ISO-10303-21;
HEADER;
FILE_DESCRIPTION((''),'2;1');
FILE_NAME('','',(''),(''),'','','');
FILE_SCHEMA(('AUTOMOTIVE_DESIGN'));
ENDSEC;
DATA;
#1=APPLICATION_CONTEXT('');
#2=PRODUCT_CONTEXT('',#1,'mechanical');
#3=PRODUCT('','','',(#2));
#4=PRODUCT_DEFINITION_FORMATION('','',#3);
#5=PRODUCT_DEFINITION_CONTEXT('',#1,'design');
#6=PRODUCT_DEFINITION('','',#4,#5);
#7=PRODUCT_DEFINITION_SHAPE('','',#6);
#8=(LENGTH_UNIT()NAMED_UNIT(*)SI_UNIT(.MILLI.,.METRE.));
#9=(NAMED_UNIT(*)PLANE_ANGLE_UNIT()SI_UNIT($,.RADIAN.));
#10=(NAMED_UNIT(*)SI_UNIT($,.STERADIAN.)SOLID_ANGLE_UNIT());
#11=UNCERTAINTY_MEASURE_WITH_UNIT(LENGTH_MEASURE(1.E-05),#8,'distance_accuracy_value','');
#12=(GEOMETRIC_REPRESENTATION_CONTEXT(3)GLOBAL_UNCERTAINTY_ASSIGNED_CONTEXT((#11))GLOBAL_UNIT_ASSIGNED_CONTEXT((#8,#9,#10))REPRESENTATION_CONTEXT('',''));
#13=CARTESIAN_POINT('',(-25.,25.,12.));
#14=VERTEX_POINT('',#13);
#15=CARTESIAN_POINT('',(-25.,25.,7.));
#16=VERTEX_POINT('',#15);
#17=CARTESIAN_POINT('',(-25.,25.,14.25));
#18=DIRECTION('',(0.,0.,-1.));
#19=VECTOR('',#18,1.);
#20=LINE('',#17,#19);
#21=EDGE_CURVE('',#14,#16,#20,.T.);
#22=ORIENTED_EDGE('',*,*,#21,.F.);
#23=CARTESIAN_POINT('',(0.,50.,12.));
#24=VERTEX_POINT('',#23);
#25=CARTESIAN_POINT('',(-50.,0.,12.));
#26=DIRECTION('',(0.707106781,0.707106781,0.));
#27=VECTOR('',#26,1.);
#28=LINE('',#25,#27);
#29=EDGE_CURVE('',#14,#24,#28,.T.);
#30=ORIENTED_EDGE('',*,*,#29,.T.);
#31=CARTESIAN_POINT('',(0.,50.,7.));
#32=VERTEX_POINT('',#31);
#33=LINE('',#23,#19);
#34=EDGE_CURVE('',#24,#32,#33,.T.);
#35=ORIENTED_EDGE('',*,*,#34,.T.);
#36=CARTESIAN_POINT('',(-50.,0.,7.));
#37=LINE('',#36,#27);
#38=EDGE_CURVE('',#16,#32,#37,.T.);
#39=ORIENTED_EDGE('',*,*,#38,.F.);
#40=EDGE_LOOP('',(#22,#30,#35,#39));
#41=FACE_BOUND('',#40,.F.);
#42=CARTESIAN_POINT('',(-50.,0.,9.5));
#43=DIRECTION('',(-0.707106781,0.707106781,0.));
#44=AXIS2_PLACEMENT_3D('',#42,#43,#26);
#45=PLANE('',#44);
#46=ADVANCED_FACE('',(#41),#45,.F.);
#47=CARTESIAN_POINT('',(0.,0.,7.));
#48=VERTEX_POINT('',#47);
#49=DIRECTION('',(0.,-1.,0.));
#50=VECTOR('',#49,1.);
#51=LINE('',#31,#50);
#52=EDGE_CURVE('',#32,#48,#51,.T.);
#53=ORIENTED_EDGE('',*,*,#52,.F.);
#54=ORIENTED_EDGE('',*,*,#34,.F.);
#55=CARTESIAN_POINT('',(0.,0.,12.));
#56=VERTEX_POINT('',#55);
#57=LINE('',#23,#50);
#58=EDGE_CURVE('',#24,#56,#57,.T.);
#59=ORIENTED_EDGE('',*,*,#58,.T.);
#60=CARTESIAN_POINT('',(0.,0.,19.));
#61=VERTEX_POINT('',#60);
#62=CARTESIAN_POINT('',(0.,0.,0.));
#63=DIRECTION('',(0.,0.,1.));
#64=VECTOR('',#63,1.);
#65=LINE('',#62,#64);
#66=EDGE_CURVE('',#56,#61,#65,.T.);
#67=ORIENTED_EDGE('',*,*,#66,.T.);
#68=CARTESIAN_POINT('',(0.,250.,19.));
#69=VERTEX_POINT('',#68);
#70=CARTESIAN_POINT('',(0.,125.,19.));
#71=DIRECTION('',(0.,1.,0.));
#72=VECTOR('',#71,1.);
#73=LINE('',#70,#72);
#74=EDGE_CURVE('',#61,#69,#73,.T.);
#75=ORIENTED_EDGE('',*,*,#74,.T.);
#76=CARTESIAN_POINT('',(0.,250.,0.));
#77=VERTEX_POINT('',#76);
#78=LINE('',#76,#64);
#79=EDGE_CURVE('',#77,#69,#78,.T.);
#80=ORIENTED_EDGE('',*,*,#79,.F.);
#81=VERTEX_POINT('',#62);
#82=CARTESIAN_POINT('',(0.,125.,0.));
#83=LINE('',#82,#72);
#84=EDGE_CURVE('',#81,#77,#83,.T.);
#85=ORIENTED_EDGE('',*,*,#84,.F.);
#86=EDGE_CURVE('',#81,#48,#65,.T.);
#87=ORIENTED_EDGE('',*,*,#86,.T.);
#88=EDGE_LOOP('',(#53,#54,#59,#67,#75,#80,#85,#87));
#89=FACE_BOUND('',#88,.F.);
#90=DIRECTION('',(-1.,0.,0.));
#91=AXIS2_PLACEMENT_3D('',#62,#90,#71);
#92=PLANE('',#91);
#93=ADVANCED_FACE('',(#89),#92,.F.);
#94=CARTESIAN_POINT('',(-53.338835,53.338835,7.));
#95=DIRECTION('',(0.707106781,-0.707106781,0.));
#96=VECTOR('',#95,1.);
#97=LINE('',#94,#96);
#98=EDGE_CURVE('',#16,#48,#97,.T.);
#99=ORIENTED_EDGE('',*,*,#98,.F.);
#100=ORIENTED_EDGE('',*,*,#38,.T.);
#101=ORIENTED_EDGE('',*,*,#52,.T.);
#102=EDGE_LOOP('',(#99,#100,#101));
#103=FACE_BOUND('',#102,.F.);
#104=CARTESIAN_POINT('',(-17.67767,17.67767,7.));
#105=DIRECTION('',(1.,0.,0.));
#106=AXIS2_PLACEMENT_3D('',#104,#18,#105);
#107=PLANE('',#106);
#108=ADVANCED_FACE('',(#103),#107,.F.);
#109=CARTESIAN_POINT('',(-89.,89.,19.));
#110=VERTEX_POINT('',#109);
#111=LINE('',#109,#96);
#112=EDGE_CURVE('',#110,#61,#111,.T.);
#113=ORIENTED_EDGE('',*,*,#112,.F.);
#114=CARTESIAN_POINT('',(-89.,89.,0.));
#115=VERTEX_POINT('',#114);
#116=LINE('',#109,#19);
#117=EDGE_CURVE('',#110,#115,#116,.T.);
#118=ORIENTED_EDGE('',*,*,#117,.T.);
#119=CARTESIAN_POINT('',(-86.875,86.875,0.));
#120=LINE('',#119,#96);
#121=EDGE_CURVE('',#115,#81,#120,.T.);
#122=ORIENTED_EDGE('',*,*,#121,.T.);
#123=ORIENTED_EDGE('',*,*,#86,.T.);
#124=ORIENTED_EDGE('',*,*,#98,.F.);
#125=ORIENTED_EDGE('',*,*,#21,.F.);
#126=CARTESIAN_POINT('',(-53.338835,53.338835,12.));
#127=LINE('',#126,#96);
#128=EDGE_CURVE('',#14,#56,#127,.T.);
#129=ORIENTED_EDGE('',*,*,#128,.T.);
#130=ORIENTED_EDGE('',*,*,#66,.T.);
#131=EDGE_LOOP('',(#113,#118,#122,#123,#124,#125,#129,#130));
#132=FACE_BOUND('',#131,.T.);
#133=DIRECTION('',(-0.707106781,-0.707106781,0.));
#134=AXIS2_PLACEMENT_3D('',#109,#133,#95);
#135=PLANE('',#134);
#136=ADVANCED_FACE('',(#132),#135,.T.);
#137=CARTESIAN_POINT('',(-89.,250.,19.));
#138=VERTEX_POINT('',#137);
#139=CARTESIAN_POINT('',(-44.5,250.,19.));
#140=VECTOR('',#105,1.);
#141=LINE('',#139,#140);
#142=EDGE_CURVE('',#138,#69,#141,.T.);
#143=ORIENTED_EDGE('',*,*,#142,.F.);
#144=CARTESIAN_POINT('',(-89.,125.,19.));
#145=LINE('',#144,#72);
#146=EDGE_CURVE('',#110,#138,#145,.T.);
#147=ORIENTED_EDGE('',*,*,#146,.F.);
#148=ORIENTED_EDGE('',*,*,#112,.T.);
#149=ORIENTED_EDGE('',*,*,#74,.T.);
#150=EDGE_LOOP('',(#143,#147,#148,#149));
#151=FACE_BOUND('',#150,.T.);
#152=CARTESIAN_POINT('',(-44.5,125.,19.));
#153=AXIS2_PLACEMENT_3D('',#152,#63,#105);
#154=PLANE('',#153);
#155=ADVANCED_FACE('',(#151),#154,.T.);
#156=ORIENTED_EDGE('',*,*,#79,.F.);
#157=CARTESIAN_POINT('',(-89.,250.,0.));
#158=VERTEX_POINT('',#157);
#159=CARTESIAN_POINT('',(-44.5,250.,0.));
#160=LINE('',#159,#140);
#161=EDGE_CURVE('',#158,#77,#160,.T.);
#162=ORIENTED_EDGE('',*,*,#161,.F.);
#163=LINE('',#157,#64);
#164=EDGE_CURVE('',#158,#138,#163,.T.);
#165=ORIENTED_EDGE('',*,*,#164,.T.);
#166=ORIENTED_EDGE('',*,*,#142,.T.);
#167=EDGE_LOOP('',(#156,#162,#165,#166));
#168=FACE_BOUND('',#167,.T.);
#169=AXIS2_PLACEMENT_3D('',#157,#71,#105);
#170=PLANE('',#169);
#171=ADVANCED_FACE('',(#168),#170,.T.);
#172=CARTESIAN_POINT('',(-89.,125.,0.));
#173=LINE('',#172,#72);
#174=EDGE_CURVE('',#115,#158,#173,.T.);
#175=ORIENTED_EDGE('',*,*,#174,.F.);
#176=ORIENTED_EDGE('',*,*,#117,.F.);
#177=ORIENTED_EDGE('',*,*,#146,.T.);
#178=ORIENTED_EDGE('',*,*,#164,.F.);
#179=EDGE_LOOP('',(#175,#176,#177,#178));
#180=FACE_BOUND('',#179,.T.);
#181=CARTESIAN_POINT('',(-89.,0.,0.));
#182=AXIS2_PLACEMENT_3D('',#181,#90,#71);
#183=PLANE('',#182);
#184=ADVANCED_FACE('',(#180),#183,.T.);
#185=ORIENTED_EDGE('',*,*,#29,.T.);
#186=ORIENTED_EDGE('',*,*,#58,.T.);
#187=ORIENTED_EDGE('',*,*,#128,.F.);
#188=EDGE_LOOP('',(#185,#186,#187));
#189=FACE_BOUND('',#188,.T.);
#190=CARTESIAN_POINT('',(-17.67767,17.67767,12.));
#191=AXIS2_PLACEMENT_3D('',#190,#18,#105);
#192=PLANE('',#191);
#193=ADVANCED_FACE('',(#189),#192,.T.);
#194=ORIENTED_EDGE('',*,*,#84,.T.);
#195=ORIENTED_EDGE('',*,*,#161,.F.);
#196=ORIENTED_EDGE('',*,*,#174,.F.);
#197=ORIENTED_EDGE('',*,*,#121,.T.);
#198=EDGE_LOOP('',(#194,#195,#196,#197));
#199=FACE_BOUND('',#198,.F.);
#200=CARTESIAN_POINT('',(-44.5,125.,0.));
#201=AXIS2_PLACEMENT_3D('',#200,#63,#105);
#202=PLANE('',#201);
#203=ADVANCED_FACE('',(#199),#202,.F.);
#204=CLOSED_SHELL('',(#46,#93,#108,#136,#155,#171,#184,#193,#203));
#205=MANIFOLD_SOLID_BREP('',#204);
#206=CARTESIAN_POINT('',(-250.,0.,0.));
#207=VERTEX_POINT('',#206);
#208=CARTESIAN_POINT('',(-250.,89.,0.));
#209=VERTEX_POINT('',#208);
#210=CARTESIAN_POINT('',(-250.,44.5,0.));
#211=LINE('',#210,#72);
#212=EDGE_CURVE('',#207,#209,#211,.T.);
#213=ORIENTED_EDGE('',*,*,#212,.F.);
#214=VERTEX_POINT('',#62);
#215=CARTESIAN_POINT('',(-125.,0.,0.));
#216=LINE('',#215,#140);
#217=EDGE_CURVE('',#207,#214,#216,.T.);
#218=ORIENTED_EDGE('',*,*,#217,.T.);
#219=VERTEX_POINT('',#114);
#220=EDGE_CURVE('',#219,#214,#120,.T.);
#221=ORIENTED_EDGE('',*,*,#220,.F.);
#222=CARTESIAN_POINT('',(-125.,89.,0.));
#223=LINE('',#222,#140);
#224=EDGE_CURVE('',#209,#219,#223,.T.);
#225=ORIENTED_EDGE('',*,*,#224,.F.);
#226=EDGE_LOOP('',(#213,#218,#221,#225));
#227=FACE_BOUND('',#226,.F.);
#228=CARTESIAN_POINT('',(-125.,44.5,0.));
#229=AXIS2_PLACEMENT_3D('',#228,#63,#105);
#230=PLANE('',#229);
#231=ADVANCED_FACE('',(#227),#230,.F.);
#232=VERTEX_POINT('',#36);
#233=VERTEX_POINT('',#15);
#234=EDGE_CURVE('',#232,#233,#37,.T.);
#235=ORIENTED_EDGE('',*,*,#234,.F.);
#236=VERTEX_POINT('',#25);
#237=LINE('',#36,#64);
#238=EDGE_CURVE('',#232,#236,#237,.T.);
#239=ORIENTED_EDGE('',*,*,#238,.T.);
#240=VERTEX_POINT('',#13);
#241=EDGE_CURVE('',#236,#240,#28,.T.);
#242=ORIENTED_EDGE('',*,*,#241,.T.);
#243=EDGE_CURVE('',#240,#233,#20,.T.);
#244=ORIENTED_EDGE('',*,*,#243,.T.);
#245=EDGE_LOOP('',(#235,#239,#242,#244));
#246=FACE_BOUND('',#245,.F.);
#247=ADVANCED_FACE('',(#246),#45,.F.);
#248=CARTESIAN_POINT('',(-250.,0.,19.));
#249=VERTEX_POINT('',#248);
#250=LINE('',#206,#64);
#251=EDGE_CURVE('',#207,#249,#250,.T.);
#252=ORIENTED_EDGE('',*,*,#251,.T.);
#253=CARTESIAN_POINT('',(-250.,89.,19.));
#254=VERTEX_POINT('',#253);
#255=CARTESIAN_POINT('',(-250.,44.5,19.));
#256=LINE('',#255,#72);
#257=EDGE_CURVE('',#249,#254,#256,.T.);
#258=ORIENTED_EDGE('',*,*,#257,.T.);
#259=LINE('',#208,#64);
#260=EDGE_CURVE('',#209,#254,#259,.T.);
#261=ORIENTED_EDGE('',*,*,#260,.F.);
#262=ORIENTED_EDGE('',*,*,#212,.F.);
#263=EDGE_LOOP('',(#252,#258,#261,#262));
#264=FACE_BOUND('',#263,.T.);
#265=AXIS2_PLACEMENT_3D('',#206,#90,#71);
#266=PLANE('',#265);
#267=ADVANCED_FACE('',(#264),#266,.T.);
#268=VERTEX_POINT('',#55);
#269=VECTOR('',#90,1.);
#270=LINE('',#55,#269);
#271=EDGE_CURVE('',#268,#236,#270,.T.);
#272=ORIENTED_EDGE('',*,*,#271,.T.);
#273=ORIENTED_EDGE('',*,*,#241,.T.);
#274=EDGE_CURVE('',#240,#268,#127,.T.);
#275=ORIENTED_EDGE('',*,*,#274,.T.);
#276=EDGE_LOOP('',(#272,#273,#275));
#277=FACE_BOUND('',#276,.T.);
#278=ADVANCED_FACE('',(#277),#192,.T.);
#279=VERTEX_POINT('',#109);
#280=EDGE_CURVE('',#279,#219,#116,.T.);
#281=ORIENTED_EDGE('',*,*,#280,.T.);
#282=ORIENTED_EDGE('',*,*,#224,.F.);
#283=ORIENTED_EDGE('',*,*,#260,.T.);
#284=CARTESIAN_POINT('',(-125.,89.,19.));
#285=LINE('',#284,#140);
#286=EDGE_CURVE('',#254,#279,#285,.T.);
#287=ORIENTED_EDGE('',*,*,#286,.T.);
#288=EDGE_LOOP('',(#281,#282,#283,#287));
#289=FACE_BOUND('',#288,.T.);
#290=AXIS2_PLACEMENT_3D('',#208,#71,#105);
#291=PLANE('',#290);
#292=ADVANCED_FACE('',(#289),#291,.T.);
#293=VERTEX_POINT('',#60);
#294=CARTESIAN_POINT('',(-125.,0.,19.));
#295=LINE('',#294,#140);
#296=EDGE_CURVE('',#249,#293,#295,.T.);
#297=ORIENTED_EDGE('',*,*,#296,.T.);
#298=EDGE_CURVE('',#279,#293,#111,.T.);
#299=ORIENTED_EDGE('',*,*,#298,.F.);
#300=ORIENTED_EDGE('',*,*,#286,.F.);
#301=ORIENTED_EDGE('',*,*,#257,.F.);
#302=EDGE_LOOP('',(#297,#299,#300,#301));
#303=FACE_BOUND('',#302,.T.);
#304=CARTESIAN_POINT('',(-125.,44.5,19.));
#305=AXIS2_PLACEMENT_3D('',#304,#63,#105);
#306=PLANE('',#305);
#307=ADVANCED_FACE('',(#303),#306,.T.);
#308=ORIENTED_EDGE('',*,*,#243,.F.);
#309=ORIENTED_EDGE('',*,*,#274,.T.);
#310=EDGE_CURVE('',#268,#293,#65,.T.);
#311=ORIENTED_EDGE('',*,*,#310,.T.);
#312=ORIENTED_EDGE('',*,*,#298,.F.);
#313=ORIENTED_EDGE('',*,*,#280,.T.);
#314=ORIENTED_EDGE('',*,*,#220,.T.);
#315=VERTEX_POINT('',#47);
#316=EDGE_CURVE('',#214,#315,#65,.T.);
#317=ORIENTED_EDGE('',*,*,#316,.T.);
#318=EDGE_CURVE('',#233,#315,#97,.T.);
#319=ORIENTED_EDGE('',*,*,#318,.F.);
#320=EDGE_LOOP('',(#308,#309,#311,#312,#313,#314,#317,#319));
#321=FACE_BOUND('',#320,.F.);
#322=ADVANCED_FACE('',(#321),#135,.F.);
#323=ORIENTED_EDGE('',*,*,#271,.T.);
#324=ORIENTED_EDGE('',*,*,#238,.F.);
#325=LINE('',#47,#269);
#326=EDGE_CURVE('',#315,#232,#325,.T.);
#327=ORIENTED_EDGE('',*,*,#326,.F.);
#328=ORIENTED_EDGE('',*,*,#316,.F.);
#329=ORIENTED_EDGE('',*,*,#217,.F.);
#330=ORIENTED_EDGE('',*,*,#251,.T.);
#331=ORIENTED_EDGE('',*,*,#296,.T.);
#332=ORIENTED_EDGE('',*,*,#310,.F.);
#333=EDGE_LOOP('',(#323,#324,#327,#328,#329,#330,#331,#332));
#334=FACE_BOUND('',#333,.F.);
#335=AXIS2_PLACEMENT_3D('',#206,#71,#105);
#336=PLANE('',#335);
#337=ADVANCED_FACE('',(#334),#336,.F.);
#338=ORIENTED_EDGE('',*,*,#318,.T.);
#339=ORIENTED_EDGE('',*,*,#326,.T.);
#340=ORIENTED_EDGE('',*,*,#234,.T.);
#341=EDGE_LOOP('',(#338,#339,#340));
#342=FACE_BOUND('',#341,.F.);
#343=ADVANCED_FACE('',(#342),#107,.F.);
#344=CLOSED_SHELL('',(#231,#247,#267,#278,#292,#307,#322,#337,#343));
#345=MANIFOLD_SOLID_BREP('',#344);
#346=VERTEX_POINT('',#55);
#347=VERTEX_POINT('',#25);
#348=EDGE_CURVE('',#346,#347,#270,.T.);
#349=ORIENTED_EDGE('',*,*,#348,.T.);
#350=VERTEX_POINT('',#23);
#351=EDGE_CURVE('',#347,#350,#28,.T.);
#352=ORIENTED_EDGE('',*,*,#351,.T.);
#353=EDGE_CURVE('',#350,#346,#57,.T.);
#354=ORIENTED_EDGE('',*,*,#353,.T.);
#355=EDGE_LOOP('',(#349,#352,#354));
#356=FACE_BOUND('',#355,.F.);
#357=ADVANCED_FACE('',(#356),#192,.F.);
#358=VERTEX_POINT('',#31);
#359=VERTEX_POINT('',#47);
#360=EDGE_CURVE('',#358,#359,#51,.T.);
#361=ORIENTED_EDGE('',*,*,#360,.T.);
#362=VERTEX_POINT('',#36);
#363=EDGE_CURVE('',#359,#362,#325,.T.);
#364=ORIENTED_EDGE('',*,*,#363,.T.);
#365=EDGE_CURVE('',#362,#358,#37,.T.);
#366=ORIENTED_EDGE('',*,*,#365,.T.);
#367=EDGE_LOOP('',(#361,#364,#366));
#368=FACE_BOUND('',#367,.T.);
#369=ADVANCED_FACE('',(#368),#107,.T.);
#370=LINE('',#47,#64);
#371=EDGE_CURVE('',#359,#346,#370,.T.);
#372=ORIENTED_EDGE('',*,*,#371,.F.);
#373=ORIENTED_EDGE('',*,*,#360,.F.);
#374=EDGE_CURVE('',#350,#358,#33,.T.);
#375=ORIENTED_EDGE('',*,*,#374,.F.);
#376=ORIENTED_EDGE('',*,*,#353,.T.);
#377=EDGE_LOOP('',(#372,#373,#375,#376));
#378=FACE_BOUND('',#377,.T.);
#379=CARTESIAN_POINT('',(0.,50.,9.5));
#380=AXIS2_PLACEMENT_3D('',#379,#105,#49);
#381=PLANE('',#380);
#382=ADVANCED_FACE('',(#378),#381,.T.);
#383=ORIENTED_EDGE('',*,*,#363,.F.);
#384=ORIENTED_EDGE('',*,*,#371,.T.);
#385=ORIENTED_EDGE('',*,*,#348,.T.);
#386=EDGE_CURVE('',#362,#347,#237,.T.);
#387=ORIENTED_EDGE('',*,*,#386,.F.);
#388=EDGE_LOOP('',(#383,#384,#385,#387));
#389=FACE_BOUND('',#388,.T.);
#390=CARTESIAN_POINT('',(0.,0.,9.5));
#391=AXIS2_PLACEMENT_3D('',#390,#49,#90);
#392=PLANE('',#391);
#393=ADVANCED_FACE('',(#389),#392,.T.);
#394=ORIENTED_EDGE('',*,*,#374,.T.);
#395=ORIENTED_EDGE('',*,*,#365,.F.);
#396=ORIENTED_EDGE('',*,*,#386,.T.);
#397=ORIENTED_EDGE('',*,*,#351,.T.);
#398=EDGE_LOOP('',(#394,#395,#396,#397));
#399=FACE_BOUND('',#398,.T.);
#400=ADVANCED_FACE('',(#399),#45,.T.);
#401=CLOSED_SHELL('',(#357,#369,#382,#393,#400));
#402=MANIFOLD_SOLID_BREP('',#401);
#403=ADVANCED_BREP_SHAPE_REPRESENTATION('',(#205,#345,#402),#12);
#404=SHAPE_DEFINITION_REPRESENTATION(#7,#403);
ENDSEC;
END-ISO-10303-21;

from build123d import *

# Parameters (mm, degrees)
F0_W     = 250
F0_H     = 89
F1_DEPTH = 19
F2_W     = 89
F2_H     = 250
F3_DEPTH = 19
F5_DEPTH = 19.001
F9_DEPTH = 2.5


with BuildPart() as f1:
    # F0 (on Top) → F1 (new body)
    with BuildSketch(Plane.XY):
        with Locations((-125, 44.5)):
            Rectangle(F0_W, F0_H)
    extrude(amount=F1_DEPTH)

    # F4 (on face) → F5 (cut, through all)
    with BuildSketch(Plane.XY.offset(19)):
        Polygon((-89, 89), (0, 0), (0, 89), align=None)
    extrude(amount=-F5_DEPTH, mode=Mode.SUBTRACT)


with BuildPart() as f3:
    # F2 (on Top) → F3 (new body)
    with BuildSketch(Plane.XY):
        with Locations((-44.5, 125)):
            Rectangle(F2_W, F2_H)
    extrude(amount=F3_DEPTH)

    # F6: cut F1
    add(f1.part, mode=Mode.SUBTRACT)


with BuildPart() as f9:
    # F8 (on mid) → F9 (new body, symmetric)
    with BuildSketch(Plane(origin=(0, 0, 9.5), x_dir=(1, 0, 0), z_dir=(0, 0, -1))):
        Polygon((-50, 0), (0, -50), (0, 0), align=None)
    extrude(amount=F9_DEPTH, both=True)


with BuildPart() as f1_1:
    add(f1.part)

    # F10: cut F9
    add(f9.part, mode=Mode.SUBTRACT)


with BuildPart() as f3_1:
    add(f3.part)

    # F10: cut F9
    add(f9.part, mode=Mode.SUBTRACT)


solid = Compound([f9.part, f1_1.part, f3_1.part])
